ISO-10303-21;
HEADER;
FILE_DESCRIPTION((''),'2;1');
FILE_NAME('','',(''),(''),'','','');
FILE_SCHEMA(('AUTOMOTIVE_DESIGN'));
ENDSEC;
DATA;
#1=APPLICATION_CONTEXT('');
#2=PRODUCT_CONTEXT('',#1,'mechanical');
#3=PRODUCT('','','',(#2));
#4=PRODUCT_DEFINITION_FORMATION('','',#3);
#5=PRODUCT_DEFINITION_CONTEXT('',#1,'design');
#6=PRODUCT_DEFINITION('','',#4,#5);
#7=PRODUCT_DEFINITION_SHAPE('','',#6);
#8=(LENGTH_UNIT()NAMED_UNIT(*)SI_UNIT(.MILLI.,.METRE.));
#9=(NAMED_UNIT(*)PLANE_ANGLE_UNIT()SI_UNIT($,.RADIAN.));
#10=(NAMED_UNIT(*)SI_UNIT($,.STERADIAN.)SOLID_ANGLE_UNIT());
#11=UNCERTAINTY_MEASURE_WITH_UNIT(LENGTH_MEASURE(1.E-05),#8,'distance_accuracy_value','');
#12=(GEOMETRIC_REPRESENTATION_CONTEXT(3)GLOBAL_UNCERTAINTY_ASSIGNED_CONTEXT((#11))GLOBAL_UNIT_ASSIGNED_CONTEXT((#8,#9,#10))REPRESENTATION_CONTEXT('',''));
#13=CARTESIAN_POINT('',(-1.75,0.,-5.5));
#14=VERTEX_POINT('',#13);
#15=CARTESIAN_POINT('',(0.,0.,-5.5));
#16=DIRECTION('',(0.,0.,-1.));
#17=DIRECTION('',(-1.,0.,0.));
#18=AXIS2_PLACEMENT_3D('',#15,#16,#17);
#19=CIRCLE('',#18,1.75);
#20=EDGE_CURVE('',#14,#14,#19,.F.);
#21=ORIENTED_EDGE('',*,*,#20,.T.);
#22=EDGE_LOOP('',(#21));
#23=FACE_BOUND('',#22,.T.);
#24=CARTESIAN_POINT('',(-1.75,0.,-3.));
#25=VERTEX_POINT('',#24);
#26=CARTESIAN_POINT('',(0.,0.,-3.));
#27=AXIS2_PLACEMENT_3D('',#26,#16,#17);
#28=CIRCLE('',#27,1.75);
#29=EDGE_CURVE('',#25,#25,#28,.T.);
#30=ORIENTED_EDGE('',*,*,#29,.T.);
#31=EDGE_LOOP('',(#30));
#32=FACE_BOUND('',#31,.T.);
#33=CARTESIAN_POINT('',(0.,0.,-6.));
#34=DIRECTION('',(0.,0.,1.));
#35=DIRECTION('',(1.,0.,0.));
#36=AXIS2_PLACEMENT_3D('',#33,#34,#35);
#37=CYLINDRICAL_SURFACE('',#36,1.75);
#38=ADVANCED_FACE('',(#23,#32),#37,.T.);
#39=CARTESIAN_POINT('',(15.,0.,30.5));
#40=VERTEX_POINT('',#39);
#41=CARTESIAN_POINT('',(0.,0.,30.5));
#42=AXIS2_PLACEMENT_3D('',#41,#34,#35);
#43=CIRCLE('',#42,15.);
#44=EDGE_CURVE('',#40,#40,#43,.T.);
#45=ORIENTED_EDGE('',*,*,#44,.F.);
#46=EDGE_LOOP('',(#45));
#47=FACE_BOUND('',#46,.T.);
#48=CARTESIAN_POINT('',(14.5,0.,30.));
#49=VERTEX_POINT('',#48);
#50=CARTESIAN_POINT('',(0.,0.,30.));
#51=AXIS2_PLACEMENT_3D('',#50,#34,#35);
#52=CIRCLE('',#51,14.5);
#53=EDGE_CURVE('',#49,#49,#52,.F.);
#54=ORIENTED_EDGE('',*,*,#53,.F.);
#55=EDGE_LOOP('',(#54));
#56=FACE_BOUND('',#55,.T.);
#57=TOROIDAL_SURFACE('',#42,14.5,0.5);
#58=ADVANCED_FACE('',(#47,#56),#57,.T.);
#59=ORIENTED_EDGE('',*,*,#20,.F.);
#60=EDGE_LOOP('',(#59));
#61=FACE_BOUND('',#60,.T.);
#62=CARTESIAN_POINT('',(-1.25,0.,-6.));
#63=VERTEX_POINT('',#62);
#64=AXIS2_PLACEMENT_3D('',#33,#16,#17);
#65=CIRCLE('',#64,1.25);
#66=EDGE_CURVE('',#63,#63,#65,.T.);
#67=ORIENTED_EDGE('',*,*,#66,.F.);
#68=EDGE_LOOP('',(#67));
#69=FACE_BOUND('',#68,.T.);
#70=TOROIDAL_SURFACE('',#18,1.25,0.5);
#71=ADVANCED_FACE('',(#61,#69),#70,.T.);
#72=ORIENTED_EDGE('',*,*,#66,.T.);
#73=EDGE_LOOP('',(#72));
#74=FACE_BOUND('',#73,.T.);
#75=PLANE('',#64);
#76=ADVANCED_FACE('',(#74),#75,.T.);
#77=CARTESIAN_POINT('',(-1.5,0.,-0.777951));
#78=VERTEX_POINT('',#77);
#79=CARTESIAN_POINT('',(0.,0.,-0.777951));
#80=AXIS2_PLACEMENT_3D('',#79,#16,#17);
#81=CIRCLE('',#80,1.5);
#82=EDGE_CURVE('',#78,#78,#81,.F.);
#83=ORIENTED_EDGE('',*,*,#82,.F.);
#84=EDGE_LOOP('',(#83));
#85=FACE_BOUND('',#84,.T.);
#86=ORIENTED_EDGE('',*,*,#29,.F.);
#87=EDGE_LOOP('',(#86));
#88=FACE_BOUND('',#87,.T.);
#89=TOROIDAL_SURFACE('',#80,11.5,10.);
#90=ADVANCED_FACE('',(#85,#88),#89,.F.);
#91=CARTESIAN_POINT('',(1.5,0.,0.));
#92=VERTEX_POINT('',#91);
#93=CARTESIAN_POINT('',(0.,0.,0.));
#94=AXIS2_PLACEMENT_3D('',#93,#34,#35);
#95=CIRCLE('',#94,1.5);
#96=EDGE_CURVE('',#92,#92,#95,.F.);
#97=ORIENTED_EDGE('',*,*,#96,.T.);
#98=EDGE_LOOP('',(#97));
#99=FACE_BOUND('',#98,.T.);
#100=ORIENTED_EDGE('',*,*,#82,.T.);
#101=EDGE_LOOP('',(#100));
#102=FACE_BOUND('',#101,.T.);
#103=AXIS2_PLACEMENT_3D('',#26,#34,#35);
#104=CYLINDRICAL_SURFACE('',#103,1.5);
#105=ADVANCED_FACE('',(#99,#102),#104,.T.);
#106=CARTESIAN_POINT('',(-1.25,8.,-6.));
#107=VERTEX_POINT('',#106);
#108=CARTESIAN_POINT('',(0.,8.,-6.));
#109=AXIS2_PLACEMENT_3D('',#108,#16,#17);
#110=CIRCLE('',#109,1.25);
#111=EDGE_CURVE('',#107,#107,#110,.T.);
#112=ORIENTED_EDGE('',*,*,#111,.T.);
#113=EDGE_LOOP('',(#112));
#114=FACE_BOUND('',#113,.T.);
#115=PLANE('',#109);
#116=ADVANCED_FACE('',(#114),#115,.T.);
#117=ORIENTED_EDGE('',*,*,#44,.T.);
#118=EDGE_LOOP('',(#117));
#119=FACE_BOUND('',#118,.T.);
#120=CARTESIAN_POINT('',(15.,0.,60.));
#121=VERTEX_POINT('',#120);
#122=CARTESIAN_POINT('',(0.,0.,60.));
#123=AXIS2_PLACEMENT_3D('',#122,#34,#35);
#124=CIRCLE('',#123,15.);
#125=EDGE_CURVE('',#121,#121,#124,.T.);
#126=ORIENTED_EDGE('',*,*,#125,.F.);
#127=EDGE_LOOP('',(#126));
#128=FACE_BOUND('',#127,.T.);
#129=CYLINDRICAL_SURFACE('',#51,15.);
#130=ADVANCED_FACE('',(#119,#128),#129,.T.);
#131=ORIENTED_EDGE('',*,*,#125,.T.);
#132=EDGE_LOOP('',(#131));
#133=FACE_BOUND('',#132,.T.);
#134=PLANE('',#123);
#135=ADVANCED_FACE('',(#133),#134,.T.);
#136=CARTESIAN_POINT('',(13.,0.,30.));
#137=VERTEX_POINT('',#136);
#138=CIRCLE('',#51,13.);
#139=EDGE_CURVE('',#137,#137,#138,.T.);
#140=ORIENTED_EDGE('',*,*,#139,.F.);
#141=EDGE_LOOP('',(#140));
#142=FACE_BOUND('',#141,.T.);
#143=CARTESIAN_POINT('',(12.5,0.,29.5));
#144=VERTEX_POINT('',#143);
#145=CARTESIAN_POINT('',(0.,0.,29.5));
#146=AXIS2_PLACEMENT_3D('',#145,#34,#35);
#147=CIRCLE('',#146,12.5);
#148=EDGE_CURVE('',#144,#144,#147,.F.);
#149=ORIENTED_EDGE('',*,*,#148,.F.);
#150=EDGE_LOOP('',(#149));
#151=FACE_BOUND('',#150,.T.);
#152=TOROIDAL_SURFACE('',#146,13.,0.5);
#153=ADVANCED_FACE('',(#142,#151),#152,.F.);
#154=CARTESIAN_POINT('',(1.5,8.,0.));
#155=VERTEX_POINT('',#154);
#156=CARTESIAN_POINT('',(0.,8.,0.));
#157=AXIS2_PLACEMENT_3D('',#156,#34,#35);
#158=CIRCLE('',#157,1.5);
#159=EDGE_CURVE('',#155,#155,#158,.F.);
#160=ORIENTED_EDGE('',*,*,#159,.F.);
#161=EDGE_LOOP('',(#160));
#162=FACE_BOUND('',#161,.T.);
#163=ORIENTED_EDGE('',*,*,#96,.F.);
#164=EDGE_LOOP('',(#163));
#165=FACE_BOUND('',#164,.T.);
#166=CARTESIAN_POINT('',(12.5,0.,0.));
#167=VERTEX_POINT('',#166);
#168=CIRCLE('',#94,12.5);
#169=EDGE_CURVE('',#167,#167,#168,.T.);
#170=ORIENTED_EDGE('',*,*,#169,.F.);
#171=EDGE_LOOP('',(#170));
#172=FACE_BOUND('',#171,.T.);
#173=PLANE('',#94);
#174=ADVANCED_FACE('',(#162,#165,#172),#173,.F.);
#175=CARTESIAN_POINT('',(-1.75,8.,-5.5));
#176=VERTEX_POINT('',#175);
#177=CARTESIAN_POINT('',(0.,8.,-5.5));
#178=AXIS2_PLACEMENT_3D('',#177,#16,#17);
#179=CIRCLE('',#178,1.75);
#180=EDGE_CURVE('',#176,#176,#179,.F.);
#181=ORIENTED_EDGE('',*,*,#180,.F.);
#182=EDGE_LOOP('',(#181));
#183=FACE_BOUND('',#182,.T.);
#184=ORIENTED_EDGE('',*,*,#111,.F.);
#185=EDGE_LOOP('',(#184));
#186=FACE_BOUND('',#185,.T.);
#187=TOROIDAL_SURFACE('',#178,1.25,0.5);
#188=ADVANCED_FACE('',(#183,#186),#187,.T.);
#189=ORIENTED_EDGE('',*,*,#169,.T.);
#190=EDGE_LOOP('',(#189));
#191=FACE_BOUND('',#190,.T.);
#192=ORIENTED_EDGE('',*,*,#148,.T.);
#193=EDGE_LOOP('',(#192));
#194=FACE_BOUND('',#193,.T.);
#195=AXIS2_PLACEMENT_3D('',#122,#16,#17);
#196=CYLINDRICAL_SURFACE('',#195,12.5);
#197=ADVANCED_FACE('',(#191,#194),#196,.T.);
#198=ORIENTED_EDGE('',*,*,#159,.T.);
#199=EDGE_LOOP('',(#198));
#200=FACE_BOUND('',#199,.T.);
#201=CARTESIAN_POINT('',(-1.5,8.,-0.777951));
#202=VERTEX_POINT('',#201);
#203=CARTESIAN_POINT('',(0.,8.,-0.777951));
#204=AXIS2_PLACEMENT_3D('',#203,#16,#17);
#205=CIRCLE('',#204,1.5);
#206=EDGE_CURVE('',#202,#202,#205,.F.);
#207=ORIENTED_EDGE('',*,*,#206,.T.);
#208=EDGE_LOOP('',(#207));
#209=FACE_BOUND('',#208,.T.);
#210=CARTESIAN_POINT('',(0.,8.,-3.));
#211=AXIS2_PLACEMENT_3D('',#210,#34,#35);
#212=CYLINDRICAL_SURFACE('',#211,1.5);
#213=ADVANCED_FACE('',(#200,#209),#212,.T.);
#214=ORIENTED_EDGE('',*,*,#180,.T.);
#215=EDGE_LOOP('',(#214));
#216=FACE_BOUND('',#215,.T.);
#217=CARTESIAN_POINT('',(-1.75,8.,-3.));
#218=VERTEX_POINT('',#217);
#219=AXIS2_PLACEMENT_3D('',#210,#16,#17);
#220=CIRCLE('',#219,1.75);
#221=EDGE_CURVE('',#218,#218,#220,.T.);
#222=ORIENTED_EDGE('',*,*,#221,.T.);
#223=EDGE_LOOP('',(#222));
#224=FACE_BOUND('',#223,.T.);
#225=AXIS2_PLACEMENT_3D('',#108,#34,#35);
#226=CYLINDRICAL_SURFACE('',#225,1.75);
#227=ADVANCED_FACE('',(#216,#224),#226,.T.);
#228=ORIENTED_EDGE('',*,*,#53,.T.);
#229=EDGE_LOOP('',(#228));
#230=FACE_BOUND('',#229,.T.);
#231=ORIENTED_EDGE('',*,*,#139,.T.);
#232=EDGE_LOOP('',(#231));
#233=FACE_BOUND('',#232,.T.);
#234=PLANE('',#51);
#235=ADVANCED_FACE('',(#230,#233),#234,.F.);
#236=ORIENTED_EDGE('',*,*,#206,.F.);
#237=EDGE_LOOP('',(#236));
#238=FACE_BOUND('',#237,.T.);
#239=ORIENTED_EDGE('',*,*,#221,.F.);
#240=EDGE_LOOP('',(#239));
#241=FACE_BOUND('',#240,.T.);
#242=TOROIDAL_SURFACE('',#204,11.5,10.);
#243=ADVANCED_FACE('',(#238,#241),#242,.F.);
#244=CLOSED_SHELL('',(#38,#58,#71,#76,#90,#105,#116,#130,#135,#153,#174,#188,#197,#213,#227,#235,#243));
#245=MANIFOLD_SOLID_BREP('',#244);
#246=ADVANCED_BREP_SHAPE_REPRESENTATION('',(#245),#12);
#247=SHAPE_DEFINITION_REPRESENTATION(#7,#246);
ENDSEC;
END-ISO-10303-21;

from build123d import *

# Parameters (mm, degrees)
SKETCH_1_R      = 12.5
EXTRUDE_1_DEPTH = 60
SKETCH_3_R      = 1.5
EXTRUDE_2_DEPTH = 3
SKETCH_4_R      = 1.75
EXTRUDE_3_DEPTH = 3
FILLET_1_R      = 10
FILLET_2_R      = 10
FILLET_3_R      = 0.5
SKETCH_5_R      = 15
EXTRUDE_4_DEPTH = 30
FILLET_4_R      = 0.5
FILLET_5_R      = 0.5


with BuildPart() as part:
    # 草图1 → 凸台-拉伸1 (new body)
    with BuildSketch(Plane.XY):
        Circle(SKETCH_1_R)
    extrude(amount=EXTRUDE_1_DEPTH)

    # 草图3 → 凸台-拉伸2 (add)
    with BuildSketch(Plane(origin=(0, 0, 0), x_dir=(-1, 0, 0), z_dir=(0, 0, -1))):
        with Locations(Location((0, 0, 0), (0, 0, 180))):
            Circle(SKETCH_3_R)
        with Locations(Location((0, 8, 0), (0, 0, 180))):
            Circle(SKETCH_3_R)
    extrude(amount=EXTRUDE_2_DEPTH)

    # 草图4 → 凸台-拉伸3 (add)
    with BuildSketch(Plane(origin=(0, 0, -3), x_dir=(-1, 0, 0), z_dir=(0, 0, -1))):
        Circle(SKETCH_4_R)
        with Locations((0, 8)):
            Circle(SKETCH_4_R)
    extrude(amount=EXTRUDE_3_DEPTH)

    # 圆角1
    # the kernel refuses this fillet: 10 mm, written as the material it adds along each edge
    with BuildSketch(Plane(origin=(0, 8, -3), x_dir=(1, 0, 0), z_dir=(0, 1, 0))) as fillet_1_piece_1:
        with BuildLine():
            CenterArc((11.5, -2.222048604), FILLET_1_R, 167.161431859, 12.838568141)
            Line((1.75, 0), (1.5, 0))
            Line((1.5, 0), (1.5, -2.222048604))
        make_face()
    revolve(axis=Axis((0, 8, -3), (0, 0, -1)))

    # 圆角2
    # the kernel refuses this fillet: 10 mm, written as the material it adds along each edge
    with BuildSketch(Plane(origin=(0, 0, -3), x_dir=(1, 0, 0), z_dir=(0, 1, 0))) as fillet_2_piece_1:
        with BuildLine():
            CenterArc((11.5, -2.222048604), FILLET_2_R, 167.161431859, 12.838568141)
            Line((1.75, 0), (1.5, 0))
            Line((1.5, 0), (1.5, -2.222048604))
        make_face()
    revolve(axis=Axis((0, 0, -3), (0, 0, -1)))

    # 圆角3
    fillet_3_edges = [part.edges().sort_by_distance(p)[0] for p in [
        (1.75, 0, -6),
        (1.75, 8, -6),
    ]]
    fillet(fillet_3_edges, radius=FILLET_3_R)

    # 草图5 → 凸台-拉伸4 (add)
    with BuildSketch(Plane.XY.offset(60)):
        Circle(SKETCH_5_R)
    extrude(amount=-EXTRUDE_4_DEPTH)

    # 圆角4
    fillet_4_edges = [part.edges().sort_by_distance(p)[0] for p in [
        (-12.5, 0, 30),
    ]]
    fillet(fillet_4_edges, radius=FILLET_4_R)

    # 圆角5
    fillet_5_edges = [part.edges().sort_by_distance(p)[0] for p in [
        (-15, 0, 30),
    ]]
    fillet(fillet_5_edges, radius=FILLET_5_R)


solid = part.part
